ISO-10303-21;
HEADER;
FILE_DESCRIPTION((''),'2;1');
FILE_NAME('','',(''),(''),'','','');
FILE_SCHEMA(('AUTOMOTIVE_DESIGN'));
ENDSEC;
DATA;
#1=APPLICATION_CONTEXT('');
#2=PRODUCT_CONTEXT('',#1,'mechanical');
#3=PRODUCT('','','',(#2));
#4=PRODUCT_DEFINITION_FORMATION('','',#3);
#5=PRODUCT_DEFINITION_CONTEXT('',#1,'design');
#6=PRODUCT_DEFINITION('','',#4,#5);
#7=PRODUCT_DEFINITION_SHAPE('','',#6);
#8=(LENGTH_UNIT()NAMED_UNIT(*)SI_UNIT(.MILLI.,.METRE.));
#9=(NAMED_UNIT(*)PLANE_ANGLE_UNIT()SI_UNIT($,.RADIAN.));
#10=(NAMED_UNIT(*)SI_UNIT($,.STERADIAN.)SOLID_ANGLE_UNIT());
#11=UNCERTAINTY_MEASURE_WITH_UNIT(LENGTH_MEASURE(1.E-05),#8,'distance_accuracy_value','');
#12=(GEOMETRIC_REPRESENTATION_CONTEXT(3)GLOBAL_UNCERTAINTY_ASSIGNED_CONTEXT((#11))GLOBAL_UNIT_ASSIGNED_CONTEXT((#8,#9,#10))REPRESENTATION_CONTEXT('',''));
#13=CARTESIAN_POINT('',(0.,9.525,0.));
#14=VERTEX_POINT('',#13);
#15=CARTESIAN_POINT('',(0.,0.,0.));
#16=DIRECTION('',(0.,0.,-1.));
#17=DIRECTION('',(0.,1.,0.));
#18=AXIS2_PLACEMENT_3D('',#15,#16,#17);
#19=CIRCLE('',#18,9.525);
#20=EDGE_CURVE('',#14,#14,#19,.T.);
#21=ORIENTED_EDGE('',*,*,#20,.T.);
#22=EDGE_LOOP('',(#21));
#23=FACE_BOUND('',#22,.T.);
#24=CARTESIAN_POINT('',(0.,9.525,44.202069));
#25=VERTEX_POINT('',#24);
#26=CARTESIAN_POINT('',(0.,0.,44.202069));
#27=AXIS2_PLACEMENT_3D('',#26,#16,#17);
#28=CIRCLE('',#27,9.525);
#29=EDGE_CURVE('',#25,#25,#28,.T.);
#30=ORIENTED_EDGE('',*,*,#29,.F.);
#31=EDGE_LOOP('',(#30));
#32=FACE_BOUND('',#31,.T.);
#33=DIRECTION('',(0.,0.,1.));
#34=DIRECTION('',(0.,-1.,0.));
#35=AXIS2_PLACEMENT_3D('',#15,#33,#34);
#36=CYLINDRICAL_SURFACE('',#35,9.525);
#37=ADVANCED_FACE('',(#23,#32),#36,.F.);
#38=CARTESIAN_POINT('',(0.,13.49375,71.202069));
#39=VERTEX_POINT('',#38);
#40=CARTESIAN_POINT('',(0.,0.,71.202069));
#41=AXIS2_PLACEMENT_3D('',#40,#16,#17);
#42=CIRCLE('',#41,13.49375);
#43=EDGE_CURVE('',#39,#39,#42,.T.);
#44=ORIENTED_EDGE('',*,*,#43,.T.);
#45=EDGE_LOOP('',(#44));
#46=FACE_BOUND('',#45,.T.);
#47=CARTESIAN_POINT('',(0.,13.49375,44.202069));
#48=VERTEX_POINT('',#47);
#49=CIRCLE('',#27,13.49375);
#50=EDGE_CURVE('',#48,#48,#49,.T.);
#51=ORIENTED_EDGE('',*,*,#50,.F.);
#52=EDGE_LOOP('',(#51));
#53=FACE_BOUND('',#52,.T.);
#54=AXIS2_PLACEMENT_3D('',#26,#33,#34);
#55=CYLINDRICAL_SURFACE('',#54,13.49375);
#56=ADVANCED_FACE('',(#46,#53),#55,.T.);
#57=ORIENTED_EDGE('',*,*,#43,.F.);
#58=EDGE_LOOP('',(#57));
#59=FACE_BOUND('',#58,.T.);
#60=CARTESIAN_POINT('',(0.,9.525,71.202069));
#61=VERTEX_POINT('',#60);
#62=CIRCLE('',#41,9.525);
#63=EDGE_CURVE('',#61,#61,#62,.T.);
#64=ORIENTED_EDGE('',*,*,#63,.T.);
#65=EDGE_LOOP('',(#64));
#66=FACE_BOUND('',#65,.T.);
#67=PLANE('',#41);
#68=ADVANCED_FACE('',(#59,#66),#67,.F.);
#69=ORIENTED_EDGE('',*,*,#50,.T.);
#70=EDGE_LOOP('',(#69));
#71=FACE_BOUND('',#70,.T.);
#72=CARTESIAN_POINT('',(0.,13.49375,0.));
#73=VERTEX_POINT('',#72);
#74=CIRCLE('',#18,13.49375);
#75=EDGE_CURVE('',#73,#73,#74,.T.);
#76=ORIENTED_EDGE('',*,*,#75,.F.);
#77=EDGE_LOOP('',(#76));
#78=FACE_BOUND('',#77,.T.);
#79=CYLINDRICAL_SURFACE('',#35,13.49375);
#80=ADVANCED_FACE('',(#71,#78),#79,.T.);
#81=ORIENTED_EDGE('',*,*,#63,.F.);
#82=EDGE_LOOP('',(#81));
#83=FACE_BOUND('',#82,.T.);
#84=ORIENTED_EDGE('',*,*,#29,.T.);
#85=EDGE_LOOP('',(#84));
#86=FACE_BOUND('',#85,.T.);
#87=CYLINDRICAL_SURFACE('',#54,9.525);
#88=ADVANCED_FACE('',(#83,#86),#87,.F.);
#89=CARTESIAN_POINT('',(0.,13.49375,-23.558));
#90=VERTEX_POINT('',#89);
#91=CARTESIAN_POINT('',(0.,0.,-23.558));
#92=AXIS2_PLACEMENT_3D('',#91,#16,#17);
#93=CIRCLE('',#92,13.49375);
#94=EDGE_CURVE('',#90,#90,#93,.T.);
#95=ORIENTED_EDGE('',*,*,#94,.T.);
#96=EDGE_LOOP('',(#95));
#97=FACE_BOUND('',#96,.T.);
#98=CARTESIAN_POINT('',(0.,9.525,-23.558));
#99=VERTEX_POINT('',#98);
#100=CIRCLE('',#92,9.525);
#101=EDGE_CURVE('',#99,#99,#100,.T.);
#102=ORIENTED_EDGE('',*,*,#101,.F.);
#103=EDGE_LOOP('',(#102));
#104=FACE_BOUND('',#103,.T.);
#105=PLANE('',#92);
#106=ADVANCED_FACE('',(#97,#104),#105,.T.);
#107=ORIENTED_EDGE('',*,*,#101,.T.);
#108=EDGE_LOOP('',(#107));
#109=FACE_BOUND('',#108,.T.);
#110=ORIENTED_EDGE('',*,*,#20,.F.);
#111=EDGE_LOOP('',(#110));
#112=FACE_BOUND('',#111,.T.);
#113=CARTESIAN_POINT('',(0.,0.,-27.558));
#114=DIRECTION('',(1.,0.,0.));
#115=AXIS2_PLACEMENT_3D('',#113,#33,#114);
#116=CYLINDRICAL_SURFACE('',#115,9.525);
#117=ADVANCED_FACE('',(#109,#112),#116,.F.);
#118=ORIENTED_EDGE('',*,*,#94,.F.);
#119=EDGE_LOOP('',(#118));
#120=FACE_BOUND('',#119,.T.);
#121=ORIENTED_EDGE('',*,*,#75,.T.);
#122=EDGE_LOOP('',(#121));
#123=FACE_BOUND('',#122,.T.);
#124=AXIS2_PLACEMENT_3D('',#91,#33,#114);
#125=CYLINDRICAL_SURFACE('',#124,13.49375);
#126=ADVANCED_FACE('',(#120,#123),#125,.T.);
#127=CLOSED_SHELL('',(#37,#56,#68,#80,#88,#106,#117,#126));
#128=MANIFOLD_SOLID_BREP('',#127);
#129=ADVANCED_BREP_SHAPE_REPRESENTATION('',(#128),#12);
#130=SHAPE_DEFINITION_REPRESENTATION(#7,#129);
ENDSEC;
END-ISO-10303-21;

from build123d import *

# Parameters (mm, degrees)
SWEEP1_PROFILE_R     = 13.49375
CUT_SWEEP1_START     = -23.558
CUT_SWEEP1_OUTLINE_R = 9.525
CUT_SWEEP1_DEPTH     = 94.760068643


# Read off the part's stored shape, not the designer's step: Cut-Sweep1
with BuildPart() as part:
    # Sweep1: sweep along a curve in space
    with BuildLine() as sweep1_path:
        Line((0, 0, 0), (0, 0, -23.558))
        Line((0, 0, 0), (0, 0, 44.202068643))
        Line((0, 0, 44.202068643), (0, 0, 71.202068643))
    # Sweep1 profile (on start of the path) → Sweep1 (sweep)
    with BuildSketch(Plane(origin=(0, 0, 71.202068643), x_dir=(0, -1, 0), z_dir=(0, 0, -1))):
        Circle(SWEEP1_PROFILE_R)
    sweep(path=sweep1_path.line)

    # Cut-Sweep1 outline → Cut-Sweep1 (cut)
    with BuildSketch(Plane.XY.offset(CUT_SWEEP1_START)):
        Circle(CUT_SWEEP1_OUTLINE_R)
    extrude(amount=CUT_SWEEP1_DEPTH, mode=Mode.SUBTRACT)


solid = part.part
